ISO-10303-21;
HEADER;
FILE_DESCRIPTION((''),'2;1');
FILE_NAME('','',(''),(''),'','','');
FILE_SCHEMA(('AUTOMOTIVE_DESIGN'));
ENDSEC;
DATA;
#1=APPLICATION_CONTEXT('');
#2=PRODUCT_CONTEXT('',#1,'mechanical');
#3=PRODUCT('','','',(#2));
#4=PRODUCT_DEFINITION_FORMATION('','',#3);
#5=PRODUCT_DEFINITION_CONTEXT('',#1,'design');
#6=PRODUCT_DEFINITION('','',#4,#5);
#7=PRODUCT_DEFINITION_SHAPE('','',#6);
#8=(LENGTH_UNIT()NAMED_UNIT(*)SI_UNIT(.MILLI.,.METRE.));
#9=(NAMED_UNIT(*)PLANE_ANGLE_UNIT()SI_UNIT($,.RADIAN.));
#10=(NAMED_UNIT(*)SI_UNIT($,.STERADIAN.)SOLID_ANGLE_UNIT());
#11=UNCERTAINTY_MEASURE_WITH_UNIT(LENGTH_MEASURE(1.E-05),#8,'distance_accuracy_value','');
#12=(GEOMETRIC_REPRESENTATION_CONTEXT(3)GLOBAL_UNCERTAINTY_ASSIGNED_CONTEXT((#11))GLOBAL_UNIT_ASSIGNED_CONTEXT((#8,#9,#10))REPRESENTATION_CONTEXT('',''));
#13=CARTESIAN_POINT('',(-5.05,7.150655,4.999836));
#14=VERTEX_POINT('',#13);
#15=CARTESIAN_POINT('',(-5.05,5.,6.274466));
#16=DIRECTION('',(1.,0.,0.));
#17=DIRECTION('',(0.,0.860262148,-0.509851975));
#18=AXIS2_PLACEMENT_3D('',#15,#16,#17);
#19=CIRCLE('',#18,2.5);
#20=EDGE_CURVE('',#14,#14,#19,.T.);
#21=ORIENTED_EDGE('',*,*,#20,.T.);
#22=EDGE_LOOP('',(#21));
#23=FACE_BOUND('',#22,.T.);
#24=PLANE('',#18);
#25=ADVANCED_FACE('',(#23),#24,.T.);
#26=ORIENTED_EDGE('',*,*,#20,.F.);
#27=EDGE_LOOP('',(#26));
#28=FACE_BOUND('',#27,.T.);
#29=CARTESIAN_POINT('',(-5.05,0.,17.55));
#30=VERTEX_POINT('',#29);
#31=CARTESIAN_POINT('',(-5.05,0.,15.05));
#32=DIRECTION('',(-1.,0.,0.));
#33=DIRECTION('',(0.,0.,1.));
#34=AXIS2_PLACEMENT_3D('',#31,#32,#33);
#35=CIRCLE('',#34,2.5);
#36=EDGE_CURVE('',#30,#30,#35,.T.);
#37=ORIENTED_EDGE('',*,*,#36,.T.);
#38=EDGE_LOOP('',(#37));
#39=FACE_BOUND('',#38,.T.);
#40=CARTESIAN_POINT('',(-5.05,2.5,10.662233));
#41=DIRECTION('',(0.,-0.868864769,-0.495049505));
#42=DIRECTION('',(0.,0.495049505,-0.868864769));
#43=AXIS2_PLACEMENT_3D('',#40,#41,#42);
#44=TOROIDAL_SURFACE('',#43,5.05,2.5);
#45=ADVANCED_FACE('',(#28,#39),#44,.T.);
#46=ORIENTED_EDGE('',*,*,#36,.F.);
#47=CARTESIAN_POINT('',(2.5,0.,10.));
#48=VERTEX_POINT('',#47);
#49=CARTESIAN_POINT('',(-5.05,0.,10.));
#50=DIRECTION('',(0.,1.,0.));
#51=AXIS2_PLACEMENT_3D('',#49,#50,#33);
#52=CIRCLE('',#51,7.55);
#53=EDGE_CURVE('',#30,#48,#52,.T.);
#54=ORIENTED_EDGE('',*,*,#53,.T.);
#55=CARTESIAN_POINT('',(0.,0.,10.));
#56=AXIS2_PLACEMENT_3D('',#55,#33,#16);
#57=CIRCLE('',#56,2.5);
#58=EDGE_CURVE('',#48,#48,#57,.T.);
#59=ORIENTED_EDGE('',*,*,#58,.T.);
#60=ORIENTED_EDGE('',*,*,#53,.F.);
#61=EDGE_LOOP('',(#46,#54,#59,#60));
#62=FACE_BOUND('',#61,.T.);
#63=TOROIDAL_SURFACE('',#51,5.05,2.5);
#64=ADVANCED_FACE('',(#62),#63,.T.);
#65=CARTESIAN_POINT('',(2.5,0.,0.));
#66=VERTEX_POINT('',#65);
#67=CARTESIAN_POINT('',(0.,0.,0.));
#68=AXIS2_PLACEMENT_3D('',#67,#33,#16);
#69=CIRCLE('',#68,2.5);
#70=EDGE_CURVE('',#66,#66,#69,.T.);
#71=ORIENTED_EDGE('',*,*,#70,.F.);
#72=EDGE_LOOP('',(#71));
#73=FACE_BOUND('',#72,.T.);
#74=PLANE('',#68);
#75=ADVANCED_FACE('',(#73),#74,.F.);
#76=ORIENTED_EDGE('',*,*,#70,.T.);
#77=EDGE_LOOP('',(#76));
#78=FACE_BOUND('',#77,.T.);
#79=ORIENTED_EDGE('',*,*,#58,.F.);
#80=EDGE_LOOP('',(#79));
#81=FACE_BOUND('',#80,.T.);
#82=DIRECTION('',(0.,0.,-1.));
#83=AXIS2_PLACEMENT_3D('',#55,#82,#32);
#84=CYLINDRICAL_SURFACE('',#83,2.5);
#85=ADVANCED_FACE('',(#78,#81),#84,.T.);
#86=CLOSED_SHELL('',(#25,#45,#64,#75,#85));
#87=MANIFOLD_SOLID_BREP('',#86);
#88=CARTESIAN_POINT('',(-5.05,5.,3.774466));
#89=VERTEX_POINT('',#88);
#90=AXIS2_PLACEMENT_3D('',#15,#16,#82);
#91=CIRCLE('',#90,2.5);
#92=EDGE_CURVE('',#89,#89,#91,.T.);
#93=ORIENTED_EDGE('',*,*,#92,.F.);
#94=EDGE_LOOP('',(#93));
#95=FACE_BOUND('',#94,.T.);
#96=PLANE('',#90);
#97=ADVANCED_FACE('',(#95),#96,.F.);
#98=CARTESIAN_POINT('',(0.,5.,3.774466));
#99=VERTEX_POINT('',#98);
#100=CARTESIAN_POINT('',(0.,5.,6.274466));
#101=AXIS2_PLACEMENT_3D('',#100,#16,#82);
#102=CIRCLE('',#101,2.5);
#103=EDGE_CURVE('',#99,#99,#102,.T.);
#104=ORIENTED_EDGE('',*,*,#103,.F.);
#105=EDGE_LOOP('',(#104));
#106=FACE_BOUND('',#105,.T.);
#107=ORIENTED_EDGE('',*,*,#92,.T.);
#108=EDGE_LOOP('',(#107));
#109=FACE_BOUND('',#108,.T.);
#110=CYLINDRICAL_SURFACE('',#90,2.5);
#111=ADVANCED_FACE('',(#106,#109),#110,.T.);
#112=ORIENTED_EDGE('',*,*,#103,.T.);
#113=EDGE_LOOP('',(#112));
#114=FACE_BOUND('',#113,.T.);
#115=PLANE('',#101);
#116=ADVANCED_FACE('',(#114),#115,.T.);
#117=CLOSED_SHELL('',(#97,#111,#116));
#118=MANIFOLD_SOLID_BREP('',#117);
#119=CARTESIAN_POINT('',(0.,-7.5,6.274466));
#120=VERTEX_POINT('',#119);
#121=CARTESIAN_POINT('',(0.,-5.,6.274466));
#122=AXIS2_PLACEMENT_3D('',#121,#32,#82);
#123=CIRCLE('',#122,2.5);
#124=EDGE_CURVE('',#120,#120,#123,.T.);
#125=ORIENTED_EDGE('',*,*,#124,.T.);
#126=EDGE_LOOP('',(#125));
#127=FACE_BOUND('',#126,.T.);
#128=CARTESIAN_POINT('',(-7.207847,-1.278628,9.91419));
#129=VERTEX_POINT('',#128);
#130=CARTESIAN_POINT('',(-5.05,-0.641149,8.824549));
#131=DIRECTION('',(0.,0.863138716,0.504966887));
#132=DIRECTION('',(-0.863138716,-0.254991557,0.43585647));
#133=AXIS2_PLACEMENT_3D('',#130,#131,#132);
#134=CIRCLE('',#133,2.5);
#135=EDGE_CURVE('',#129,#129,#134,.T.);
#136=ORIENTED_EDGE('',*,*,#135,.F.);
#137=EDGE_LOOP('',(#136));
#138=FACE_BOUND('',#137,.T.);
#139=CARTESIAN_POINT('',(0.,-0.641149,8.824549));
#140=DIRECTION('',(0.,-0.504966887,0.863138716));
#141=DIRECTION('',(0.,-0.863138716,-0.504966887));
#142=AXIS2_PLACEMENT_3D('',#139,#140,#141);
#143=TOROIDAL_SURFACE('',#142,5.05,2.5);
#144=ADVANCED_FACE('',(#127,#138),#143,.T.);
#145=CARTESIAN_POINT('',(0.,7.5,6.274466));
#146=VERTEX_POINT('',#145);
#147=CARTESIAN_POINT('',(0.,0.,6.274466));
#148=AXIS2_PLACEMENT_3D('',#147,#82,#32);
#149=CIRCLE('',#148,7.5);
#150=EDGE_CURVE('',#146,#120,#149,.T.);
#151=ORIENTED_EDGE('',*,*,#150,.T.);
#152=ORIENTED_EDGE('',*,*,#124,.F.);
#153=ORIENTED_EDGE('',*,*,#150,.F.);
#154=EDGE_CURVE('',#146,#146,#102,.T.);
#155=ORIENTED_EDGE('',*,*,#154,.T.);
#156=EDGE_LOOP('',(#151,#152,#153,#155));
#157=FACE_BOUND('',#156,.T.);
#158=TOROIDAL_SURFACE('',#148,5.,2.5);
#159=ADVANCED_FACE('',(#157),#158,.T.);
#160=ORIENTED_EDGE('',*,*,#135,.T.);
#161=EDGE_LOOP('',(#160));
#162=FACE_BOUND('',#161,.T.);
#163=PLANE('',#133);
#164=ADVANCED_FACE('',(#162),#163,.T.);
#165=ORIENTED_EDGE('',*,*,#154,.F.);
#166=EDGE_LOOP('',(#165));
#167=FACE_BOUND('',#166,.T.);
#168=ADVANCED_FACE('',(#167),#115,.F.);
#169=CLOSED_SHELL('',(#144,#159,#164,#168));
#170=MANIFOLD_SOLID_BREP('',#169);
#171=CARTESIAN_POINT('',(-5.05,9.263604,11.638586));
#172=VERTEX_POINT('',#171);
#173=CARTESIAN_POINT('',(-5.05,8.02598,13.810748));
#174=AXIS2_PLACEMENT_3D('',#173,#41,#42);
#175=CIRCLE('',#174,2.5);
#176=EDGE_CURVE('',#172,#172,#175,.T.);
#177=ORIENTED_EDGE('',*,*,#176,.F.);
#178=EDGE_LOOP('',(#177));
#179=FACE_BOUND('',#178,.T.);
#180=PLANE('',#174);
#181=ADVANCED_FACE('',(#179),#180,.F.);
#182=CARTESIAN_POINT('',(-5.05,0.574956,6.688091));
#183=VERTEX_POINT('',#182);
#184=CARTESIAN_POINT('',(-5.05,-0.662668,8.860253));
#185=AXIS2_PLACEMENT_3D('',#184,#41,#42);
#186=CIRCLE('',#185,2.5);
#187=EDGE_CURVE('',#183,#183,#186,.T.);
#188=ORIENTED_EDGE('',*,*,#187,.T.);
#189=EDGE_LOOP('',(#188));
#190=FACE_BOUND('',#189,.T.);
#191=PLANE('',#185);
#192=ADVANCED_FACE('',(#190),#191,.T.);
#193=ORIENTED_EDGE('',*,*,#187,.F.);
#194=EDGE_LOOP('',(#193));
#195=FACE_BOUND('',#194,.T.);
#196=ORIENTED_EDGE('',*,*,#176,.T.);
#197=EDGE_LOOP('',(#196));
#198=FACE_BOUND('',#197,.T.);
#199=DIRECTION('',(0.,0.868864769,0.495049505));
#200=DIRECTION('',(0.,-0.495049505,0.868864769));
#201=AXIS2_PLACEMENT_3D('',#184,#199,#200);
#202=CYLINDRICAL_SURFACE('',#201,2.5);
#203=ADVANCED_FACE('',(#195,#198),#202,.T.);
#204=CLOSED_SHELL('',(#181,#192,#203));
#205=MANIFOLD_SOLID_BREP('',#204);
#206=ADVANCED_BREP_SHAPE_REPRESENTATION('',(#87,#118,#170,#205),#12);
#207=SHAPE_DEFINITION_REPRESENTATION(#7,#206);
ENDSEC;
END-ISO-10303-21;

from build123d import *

# Parameters (mm, degrees)
SKETCH1_R                = 2.5
BOSS_EXTRUDE1_DEPTH      = 10
SKETCH3_R                = 2.5
SKETCH4_R                = 2.5
BOSS_EXTRUDE2_DEPTH      = 5.05
SKETCH8_R                = 2.5
SKETCH14_R               = 2.5
BOSS_EXTRUDE3_DEPTH      = 3.64
BOSS_EXTRUDE3_DEPTH_BACK = 6.36
SKETCH58_R               = 2.5
SWEEP39_OUTLINE_R        = 2.5
SWEEP39_ANGLE            = 90


# Read off the part's stored shape, not the designer's step: Sweep39
with BuildPart() as part:
    # Sketch1 → Boss-Extrude1 (new body)
    with BuildSketch(Plane.XY):
        Circle(SKETCH1_R)
    extrude(amount=BOSS_EXTRUDE1_DEPTH)

    # Sweep1: sweep along a path in Sketch2
    with BuildLine(Plane(origin=(0, 0, 0), x_dir=(1, 0, 0), z_dir=(0, 1, 0))) as sweep1_path:
        ThreePointArc((-5.05, -15.05), (-1.479110755, -13.570889245), (0, -10))
    # Sketch3 → Sweep1 (sweep)
    with BuildSketch(Plane.XY.offset(10)):
        Circle(SKETCH3_R)
    sweep(path=sweep1_path.line)

    # Sweep10: sweep along a path in Sketch7
    with BuildLine(Plane(origin=(0, 6.473472664, 3.688363886), x_dir=(-1, 0, 0), z_dir=(0, -0.8688647694827255, -0.49504950495049516))) as sweep10_path:
        ThreePointArc((5.05, -13.076414781), (10.1, -8.026414781), (5.05, -2.976414781))
    # Sketch8 → Sweep10 (sweep)
    with BuildSketch(Plane.ZY.offset(5.05)):
        with Locations((15.05, 0)):
            Circle(SKETCH8_R)
    sweep(path=sweep10_path.line)


with BuildPart() as body_2:
    # Sketch4 → Boss-Extrude2 (new body)
    with BuildSketch(Plane(origin=(0, 0, 0), x_dir=(0, 0, -1), z_dir=(1, 0, 0))):
        with Locations((-6.274465828, 5)):
            Circle(SKETCH4_R)
    extrude(amount=-BOSS_EXTRUDE2_DEPTH)


with BuildPart() as body_3:
    # Sweep38: sweep along a path in Sketch57
    with BuildLine(Plane.XY.offset(6.274465828)) as sweep38_path:
        ThreePointArc((0, 5), (5, 0), (0, -5))
    # Sketch14 → Sweep38 (sweep)
    with BuildSketch(Plane(origin=(0, 0, 0), x_dir=(0, 0, -1), z_dir=(1, 0, 0))):
        with Locations((-6.274465828, 5)):
            Circle(SKETCH14_R)
    sweep(path=sweep38_path.line)

    # Sweep39 outline → Sweep39 (revolve)
    with BuildSketch(Plane(origin=(0, 3.368574828, 1.970736234), x_dir=(0, -0.8631387162148537, -0.5049668866083937), z_dir=(1, 0, 0))):
        with Locations((5.05, -7.940568813)):
            Circle(SWEEP39_OUTLINE_R)
    revolve(axis=Axis((0, 3.368574828, 1.970736234), (0, 0.5049668866083938, -0.8631387162148539)), revolution_arc=SWEEP39_ANGLE)


with BuildPart() as body_4:
    # Sketch58 → Boss-Extrude3 (new, two sides: drawn at the far end of the back side and taken through both)
    with BuildSketch(Plane(origin=(0, 6.473472664, 3.688363886), x_dir=(-1, 0, 0), z_dir=(0, -0.8688647694827255, -0.49504950495049516)).offset(-BOSS_EXTRUDE3_DEPTH_BACK)):
        with Locations(Location((5.05, -8.026414781, 0), (0, 0, 90))):
            Circle(SKETCH58_R)
    extrude(amount=BOSS_EXTRUDE3_DEPTH + BOSS_EXTRUDE3_DEPTH_BACK)


solid = Compound([part.part, body_2.part, body_3.part, body_4.part])
